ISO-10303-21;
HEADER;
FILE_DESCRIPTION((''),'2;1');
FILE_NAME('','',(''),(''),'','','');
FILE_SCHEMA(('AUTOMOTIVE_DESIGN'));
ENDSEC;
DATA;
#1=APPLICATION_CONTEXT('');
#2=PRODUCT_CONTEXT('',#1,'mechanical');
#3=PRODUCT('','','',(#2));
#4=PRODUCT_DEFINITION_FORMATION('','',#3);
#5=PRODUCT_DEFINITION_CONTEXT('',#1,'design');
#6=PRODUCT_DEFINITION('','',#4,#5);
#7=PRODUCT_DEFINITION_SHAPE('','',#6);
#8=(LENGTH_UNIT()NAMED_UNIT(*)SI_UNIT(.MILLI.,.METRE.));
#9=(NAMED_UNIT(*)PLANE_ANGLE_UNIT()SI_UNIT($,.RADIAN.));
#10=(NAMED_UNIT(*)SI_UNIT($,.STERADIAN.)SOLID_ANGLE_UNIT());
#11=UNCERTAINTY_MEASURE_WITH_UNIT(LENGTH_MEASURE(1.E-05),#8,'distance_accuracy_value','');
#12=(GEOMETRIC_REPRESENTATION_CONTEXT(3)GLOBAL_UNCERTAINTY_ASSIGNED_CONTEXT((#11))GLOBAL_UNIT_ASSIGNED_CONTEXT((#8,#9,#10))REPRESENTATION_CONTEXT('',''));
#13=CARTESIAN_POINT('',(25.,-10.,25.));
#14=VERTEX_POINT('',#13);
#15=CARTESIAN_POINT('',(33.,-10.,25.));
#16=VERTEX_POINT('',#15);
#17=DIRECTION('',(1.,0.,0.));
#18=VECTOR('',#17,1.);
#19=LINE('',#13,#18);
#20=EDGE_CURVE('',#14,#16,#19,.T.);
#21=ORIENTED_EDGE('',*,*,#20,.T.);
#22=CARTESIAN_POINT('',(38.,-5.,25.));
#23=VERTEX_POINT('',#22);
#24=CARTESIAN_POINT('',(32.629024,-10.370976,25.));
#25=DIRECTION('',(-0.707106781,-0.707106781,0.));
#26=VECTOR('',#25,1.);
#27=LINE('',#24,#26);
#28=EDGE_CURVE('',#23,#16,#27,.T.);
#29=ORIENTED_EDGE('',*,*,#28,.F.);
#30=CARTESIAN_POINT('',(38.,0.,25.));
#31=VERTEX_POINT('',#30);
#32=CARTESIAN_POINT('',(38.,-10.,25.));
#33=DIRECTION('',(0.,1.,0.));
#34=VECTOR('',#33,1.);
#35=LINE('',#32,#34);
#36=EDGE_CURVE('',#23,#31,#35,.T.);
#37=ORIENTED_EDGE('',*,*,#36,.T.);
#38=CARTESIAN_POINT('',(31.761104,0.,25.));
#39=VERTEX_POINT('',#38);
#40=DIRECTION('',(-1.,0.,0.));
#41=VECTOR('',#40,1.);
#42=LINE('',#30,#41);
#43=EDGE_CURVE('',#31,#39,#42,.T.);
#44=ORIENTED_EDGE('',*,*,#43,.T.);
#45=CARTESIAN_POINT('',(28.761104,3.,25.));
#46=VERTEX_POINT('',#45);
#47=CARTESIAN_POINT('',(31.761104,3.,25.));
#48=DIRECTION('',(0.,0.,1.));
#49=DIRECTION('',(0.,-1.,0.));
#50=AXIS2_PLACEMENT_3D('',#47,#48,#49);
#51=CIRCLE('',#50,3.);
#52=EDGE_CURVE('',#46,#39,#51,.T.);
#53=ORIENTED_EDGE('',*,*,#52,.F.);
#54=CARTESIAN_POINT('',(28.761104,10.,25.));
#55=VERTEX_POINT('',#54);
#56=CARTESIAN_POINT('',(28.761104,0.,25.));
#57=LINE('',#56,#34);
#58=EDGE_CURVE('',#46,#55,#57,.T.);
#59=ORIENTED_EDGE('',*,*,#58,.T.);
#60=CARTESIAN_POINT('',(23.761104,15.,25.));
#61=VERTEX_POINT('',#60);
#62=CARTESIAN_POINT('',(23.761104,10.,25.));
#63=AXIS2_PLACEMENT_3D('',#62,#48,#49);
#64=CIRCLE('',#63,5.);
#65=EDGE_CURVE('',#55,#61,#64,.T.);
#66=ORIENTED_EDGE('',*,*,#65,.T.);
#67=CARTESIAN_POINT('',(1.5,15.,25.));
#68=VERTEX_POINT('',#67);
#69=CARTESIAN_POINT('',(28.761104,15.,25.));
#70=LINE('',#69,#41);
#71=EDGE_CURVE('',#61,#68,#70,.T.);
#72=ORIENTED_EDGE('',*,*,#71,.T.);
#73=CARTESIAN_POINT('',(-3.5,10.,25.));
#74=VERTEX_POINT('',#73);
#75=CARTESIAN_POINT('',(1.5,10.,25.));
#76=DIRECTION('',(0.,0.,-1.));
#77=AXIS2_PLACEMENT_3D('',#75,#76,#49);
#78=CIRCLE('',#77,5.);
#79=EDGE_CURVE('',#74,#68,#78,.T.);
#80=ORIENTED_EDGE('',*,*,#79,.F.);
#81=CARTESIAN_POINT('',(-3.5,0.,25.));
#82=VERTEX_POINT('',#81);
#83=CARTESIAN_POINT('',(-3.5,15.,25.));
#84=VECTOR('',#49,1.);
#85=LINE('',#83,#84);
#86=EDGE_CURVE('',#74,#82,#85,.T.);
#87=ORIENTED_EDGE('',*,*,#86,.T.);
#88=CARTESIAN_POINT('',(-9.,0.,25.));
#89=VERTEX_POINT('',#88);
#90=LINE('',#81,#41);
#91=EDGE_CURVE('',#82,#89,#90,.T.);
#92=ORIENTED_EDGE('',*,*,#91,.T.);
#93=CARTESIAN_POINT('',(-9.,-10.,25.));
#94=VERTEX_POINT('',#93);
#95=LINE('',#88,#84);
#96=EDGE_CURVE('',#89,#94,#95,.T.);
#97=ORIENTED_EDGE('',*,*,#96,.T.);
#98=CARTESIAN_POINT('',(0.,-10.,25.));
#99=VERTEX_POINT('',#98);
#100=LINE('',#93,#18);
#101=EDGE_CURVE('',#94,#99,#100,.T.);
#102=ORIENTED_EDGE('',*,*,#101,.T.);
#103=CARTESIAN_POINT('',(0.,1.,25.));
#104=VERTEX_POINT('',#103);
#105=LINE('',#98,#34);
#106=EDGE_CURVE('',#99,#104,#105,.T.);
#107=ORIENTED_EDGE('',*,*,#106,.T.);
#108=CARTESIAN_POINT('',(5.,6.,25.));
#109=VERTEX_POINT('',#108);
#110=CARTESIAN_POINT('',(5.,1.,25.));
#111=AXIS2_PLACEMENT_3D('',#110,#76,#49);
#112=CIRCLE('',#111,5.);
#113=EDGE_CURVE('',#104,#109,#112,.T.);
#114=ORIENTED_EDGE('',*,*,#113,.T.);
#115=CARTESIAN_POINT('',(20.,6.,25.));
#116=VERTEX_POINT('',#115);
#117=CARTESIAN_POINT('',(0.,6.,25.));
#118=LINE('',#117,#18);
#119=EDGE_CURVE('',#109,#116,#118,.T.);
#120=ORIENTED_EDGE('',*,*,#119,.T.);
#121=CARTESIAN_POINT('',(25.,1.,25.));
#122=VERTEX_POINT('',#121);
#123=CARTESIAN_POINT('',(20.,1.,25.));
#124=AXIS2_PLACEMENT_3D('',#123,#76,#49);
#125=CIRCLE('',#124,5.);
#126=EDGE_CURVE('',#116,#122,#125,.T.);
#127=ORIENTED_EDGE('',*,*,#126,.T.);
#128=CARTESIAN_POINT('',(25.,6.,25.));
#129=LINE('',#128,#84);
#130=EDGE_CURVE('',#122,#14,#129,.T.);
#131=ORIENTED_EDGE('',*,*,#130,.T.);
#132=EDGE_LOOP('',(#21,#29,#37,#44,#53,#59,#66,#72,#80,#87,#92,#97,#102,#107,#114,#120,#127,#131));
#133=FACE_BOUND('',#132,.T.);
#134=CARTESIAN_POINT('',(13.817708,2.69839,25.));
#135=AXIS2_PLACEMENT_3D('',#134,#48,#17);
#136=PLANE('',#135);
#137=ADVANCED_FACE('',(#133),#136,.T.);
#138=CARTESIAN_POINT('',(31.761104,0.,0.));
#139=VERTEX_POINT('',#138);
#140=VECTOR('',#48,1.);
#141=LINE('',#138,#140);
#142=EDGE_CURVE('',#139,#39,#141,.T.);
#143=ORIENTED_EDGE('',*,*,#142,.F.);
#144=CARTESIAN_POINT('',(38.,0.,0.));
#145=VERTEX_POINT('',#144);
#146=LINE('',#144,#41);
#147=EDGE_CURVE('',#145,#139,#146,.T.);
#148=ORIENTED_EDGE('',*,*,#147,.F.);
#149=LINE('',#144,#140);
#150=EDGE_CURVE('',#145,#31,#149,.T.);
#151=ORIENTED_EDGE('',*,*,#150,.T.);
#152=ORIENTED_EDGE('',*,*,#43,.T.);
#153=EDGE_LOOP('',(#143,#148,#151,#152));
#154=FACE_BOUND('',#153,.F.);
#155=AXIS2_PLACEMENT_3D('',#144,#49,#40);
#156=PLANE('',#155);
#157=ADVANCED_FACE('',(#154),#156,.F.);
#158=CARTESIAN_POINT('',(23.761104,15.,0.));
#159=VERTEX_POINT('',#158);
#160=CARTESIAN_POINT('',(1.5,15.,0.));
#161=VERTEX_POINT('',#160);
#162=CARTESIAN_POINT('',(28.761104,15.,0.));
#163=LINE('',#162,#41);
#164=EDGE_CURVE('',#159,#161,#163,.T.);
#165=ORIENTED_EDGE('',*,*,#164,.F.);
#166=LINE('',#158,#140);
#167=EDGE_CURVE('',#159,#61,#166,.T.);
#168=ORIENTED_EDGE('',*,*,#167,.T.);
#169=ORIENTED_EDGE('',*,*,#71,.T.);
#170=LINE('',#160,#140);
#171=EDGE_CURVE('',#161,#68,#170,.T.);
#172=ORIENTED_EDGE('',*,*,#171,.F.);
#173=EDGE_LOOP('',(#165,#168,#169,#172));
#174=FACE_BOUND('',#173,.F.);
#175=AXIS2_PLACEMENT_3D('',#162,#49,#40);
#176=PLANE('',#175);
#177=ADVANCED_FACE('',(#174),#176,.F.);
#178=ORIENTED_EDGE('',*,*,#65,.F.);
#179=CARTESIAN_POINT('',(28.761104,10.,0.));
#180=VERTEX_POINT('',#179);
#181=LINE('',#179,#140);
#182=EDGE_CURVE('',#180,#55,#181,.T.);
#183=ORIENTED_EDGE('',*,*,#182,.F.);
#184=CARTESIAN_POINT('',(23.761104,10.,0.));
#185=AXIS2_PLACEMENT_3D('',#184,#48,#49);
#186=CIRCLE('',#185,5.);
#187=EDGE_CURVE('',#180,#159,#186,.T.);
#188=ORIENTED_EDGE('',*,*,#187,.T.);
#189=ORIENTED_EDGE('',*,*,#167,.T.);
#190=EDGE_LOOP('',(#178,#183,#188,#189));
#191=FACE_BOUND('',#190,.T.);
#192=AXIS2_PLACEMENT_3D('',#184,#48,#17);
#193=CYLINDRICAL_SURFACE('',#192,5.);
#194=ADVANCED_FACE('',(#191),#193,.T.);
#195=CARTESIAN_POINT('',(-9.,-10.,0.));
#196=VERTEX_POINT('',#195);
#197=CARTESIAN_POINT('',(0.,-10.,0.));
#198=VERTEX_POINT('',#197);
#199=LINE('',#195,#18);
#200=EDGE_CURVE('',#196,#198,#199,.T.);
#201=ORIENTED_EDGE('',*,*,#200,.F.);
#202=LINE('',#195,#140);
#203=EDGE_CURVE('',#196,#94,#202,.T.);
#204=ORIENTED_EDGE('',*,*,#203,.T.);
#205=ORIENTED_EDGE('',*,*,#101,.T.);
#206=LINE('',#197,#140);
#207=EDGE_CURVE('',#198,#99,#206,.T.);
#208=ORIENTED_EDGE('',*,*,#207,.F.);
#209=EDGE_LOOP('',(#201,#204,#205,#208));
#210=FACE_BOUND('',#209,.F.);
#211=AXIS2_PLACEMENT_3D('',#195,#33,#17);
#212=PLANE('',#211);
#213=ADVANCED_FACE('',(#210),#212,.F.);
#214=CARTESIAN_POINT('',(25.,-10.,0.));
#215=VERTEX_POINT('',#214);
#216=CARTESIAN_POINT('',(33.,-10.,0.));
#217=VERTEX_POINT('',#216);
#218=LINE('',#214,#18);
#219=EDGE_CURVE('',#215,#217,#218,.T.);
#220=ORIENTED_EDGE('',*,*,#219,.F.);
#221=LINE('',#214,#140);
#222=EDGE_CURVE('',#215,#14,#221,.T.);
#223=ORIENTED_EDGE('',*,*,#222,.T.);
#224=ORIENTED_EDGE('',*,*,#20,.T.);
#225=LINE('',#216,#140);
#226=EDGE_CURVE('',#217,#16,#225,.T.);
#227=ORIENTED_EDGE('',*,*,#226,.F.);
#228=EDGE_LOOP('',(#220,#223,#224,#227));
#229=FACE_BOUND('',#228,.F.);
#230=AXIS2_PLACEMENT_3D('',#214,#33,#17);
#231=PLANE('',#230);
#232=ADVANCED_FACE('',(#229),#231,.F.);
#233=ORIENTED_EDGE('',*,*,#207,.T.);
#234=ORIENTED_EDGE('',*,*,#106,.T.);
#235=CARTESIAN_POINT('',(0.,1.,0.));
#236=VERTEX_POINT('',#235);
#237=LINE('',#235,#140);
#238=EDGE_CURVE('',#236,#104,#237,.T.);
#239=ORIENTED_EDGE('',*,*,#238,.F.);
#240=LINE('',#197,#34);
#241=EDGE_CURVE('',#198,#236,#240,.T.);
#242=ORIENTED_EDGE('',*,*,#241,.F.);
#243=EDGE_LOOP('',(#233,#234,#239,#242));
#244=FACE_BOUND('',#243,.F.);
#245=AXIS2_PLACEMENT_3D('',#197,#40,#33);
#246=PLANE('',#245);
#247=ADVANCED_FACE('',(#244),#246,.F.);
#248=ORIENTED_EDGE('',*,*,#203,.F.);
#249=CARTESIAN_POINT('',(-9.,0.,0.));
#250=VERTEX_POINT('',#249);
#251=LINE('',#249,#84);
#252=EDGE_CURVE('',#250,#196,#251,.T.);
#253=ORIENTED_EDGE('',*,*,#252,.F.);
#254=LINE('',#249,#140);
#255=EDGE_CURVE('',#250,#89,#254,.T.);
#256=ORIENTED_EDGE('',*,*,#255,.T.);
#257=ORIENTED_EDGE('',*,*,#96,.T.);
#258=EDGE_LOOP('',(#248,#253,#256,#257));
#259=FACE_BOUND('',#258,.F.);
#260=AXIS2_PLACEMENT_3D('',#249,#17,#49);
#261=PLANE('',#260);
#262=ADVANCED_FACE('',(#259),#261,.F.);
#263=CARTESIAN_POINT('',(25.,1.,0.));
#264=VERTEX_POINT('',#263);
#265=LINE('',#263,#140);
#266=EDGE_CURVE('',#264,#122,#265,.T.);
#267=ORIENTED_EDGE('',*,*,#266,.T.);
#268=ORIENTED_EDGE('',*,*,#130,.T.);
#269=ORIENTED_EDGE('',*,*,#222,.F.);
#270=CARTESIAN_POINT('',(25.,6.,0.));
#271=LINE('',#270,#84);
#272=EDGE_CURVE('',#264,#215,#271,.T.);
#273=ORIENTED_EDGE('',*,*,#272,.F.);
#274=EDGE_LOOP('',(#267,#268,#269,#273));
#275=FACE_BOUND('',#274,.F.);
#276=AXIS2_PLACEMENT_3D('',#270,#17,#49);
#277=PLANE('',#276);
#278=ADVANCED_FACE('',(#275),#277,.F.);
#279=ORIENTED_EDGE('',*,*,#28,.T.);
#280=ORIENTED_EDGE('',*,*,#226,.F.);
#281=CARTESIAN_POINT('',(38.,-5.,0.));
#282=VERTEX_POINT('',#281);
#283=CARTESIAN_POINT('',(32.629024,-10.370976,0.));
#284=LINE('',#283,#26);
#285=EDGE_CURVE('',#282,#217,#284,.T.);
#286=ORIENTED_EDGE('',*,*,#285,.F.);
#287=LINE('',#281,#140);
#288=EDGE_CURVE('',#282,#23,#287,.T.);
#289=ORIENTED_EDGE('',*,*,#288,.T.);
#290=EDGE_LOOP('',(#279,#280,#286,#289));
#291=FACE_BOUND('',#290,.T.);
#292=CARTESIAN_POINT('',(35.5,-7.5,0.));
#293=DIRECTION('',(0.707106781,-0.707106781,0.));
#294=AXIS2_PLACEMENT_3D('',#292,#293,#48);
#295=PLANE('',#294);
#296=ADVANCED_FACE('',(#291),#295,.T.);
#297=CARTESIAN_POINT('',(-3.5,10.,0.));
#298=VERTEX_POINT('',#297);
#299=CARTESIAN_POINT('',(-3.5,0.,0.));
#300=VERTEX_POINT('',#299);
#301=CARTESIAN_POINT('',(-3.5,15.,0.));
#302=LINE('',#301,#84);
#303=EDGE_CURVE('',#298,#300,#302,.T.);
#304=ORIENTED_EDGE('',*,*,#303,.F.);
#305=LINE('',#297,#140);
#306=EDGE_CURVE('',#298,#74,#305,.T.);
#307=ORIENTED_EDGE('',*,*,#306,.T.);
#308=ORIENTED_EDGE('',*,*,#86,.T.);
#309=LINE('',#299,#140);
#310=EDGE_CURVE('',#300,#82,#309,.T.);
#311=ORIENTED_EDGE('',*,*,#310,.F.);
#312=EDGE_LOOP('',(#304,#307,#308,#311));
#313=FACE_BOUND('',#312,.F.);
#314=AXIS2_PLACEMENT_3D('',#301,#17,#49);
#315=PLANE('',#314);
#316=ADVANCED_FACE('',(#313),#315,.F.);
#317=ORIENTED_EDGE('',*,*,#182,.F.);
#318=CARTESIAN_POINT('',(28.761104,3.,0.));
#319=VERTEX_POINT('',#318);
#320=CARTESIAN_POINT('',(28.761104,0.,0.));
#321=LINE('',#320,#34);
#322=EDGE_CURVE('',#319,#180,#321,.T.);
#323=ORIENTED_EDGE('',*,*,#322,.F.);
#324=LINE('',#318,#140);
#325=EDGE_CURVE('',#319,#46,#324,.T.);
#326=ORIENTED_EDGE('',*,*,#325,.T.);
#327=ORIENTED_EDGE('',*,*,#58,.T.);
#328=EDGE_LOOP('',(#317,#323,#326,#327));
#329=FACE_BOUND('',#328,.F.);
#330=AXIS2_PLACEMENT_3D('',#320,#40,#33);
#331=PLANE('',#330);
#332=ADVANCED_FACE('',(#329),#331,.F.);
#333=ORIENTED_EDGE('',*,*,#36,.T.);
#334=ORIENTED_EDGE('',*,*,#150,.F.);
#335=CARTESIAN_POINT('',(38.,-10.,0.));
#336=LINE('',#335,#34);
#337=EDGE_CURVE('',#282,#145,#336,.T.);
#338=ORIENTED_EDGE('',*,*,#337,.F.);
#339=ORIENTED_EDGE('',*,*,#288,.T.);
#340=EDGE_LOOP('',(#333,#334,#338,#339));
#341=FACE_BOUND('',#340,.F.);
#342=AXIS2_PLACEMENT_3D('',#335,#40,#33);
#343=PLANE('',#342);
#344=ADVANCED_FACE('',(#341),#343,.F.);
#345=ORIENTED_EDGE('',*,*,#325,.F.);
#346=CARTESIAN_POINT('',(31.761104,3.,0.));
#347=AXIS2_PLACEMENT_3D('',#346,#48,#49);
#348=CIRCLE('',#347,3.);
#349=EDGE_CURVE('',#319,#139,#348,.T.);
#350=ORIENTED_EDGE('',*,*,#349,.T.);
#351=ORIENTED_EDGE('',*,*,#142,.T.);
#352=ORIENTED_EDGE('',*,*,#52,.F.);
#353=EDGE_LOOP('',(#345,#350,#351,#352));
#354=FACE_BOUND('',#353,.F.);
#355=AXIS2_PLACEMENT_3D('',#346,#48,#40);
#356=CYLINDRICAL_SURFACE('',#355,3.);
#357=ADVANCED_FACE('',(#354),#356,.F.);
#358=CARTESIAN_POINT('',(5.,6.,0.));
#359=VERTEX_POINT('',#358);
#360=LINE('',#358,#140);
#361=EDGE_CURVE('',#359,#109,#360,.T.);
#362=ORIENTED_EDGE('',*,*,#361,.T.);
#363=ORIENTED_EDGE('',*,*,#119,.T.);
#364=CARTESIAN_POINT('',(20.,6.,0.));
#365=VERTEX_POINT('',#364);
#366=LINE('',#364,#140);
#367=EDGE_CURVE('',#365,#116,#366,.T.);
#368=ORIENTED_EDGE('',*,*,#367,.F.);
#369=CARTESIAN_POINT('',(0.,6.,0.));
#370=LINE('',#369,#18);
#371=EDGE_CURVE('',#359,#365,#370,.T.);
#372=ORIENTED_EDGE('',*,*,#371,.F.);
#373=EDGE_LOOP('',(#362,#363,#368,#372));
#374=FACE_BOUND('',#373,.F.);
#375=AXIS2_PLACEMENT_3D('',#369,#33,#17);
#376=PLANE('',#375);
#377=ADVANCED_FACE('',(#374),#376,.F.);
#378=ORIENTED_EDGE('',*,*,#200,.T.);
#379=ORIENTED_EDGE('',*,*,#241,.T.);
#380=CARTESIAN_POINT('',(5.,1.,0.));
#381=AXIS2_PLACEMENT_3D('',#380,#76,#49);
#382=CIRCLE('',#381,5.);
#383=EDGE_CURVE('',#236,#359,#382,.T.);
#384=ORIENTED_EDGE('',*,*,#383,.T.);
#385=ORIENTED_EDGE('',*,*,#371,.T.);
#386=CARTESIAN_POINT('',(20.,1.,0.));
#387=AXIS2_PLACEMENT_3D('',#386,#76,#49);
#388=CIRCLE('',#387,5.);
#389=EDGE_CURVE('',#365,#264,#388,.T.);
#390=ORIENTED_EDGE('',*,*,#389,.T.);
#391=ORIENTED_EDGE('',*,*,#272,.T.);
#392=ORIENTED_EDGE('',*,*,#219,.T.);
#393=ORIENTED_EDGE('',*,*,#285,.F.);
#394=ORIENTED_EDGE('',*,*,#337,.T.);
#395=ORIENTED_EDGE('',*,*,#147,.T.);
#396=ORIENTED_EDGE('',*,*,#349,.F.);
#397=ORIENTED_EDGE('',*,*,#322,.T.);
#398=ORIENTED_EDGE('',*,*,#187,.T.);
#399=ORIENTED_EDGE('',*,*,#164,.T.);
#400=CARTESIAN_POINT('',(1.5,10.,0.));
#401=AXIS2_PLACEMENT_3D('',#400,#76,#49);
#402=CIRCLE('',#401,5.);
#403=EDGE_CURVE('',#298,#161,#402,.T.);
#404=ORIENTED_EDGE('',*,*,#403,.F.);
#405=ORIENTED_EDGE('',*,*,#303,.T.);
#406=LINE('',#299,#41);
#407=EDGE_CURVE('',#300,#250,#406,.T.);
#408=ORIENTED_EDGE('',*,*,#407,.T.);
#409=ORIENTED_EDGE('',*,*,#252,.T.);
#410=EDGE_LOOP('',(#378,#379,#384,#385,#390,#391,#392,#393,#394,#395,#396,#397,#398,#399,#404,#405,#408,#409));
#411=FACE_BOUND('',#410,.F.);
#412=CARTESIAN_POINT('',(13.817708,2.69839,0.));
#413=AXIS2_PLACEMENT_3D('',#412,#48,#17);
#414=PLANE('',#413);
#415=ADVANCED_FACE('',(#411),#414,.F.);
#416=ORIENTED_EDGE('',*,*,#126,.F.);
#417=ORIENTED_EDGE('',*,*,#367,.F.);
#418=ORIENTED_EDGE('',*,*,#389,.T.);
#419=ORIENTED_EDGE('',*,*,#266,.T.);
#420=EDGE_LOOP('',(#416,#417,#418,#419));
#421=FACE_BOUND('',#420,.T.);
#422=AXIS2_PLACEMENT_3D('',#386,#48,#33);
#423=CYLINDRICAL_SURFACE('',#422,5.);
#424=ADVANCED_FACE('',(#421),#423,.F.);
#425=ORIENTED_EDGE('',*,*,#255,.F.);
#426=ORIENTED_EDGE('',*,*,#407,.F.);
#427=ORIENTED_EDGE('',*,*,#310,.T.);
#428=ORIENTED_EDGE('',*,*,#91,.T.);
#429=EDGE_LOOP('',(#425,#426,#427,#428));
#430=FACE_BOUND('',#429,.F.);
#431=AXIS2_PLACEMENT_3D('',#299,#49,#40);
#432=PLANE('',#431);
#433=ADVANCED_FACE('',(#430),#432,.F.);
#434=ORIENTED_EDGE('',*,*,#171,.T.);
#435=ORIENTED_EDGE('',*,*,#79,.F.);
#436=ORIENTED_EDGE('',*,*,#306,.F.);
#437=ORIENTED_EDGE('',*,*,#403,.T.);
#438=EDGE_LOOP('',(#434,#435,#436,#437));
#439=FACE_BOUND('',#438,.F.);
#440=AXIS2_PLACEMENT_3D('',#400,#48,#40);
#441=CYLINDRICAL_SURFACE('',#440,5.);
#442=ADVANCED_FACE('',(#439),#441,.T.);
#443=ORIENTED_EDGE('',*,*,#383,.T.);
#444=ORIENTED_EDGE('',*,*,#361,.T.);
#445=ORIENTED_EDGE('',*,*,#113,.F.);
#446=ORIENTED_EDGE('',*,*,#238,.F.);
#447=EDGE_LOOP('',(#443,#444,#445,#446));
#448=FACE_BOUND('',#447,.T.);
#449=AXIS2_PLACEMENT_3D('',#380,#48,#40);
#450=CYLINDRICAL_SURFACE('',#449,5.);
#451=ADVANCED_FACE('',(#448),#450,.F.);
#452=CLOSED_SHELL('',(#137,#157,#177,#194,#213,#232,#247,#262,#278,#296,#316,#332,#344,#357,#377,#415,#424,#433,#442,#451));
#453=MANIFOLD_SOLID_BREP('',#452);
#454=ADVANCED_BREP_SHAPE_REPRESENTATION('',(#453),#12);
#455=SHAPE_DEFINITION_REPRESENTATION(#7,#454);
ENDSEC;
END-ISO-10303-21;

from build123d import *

# Parameters (mm, degrees)
F1_DEPTH = 25
F2_R     = 5
F3_R     = 3
F4_SIZE  = 5


with BuildPart() as f1:
    # F0 (on Top) → F1 (new body)
    with BuildSketch(Plane.XY):
        Polygon((0, 15), (-3.5, 15), (-3.5, 0), (-9, 0), (-9, -10), (0, -10), (0, 0), (0, 6), (25, 6), (25, 0), (25, -10), (38, -10), (38, 0), (28.7611037493, 0), (28.7611037493, 15), (25, 15), align=None)
    extrude(amount=F1_DEPTH)

    # F2
    f2_edges = [f1.edges().sort_by_distance(p)[0] for p in [
        (-3.5, 15, 12.5),
        (28.761104, 15, 12.5),
        (0, 6, 12.5),
        (25, 6, 12.5),
    ]]
    fillet(f2_edges, radius=F2_R)

    # F3
    f3_edges = [f1.edges().sort_by_distance(p)[0] for p in [
        (28.761104, 0, 12.5),
    ]]
    fillet(f3_edges, radius=F3_R)

    # F4
    f4_edges = [f1.edges().sort_by_distance(p)[0] for p in [
        (38, -10, 12.5),
    ]]
    chamfer(f4_edges, length=F4_SIZE)


solid = f1.part
